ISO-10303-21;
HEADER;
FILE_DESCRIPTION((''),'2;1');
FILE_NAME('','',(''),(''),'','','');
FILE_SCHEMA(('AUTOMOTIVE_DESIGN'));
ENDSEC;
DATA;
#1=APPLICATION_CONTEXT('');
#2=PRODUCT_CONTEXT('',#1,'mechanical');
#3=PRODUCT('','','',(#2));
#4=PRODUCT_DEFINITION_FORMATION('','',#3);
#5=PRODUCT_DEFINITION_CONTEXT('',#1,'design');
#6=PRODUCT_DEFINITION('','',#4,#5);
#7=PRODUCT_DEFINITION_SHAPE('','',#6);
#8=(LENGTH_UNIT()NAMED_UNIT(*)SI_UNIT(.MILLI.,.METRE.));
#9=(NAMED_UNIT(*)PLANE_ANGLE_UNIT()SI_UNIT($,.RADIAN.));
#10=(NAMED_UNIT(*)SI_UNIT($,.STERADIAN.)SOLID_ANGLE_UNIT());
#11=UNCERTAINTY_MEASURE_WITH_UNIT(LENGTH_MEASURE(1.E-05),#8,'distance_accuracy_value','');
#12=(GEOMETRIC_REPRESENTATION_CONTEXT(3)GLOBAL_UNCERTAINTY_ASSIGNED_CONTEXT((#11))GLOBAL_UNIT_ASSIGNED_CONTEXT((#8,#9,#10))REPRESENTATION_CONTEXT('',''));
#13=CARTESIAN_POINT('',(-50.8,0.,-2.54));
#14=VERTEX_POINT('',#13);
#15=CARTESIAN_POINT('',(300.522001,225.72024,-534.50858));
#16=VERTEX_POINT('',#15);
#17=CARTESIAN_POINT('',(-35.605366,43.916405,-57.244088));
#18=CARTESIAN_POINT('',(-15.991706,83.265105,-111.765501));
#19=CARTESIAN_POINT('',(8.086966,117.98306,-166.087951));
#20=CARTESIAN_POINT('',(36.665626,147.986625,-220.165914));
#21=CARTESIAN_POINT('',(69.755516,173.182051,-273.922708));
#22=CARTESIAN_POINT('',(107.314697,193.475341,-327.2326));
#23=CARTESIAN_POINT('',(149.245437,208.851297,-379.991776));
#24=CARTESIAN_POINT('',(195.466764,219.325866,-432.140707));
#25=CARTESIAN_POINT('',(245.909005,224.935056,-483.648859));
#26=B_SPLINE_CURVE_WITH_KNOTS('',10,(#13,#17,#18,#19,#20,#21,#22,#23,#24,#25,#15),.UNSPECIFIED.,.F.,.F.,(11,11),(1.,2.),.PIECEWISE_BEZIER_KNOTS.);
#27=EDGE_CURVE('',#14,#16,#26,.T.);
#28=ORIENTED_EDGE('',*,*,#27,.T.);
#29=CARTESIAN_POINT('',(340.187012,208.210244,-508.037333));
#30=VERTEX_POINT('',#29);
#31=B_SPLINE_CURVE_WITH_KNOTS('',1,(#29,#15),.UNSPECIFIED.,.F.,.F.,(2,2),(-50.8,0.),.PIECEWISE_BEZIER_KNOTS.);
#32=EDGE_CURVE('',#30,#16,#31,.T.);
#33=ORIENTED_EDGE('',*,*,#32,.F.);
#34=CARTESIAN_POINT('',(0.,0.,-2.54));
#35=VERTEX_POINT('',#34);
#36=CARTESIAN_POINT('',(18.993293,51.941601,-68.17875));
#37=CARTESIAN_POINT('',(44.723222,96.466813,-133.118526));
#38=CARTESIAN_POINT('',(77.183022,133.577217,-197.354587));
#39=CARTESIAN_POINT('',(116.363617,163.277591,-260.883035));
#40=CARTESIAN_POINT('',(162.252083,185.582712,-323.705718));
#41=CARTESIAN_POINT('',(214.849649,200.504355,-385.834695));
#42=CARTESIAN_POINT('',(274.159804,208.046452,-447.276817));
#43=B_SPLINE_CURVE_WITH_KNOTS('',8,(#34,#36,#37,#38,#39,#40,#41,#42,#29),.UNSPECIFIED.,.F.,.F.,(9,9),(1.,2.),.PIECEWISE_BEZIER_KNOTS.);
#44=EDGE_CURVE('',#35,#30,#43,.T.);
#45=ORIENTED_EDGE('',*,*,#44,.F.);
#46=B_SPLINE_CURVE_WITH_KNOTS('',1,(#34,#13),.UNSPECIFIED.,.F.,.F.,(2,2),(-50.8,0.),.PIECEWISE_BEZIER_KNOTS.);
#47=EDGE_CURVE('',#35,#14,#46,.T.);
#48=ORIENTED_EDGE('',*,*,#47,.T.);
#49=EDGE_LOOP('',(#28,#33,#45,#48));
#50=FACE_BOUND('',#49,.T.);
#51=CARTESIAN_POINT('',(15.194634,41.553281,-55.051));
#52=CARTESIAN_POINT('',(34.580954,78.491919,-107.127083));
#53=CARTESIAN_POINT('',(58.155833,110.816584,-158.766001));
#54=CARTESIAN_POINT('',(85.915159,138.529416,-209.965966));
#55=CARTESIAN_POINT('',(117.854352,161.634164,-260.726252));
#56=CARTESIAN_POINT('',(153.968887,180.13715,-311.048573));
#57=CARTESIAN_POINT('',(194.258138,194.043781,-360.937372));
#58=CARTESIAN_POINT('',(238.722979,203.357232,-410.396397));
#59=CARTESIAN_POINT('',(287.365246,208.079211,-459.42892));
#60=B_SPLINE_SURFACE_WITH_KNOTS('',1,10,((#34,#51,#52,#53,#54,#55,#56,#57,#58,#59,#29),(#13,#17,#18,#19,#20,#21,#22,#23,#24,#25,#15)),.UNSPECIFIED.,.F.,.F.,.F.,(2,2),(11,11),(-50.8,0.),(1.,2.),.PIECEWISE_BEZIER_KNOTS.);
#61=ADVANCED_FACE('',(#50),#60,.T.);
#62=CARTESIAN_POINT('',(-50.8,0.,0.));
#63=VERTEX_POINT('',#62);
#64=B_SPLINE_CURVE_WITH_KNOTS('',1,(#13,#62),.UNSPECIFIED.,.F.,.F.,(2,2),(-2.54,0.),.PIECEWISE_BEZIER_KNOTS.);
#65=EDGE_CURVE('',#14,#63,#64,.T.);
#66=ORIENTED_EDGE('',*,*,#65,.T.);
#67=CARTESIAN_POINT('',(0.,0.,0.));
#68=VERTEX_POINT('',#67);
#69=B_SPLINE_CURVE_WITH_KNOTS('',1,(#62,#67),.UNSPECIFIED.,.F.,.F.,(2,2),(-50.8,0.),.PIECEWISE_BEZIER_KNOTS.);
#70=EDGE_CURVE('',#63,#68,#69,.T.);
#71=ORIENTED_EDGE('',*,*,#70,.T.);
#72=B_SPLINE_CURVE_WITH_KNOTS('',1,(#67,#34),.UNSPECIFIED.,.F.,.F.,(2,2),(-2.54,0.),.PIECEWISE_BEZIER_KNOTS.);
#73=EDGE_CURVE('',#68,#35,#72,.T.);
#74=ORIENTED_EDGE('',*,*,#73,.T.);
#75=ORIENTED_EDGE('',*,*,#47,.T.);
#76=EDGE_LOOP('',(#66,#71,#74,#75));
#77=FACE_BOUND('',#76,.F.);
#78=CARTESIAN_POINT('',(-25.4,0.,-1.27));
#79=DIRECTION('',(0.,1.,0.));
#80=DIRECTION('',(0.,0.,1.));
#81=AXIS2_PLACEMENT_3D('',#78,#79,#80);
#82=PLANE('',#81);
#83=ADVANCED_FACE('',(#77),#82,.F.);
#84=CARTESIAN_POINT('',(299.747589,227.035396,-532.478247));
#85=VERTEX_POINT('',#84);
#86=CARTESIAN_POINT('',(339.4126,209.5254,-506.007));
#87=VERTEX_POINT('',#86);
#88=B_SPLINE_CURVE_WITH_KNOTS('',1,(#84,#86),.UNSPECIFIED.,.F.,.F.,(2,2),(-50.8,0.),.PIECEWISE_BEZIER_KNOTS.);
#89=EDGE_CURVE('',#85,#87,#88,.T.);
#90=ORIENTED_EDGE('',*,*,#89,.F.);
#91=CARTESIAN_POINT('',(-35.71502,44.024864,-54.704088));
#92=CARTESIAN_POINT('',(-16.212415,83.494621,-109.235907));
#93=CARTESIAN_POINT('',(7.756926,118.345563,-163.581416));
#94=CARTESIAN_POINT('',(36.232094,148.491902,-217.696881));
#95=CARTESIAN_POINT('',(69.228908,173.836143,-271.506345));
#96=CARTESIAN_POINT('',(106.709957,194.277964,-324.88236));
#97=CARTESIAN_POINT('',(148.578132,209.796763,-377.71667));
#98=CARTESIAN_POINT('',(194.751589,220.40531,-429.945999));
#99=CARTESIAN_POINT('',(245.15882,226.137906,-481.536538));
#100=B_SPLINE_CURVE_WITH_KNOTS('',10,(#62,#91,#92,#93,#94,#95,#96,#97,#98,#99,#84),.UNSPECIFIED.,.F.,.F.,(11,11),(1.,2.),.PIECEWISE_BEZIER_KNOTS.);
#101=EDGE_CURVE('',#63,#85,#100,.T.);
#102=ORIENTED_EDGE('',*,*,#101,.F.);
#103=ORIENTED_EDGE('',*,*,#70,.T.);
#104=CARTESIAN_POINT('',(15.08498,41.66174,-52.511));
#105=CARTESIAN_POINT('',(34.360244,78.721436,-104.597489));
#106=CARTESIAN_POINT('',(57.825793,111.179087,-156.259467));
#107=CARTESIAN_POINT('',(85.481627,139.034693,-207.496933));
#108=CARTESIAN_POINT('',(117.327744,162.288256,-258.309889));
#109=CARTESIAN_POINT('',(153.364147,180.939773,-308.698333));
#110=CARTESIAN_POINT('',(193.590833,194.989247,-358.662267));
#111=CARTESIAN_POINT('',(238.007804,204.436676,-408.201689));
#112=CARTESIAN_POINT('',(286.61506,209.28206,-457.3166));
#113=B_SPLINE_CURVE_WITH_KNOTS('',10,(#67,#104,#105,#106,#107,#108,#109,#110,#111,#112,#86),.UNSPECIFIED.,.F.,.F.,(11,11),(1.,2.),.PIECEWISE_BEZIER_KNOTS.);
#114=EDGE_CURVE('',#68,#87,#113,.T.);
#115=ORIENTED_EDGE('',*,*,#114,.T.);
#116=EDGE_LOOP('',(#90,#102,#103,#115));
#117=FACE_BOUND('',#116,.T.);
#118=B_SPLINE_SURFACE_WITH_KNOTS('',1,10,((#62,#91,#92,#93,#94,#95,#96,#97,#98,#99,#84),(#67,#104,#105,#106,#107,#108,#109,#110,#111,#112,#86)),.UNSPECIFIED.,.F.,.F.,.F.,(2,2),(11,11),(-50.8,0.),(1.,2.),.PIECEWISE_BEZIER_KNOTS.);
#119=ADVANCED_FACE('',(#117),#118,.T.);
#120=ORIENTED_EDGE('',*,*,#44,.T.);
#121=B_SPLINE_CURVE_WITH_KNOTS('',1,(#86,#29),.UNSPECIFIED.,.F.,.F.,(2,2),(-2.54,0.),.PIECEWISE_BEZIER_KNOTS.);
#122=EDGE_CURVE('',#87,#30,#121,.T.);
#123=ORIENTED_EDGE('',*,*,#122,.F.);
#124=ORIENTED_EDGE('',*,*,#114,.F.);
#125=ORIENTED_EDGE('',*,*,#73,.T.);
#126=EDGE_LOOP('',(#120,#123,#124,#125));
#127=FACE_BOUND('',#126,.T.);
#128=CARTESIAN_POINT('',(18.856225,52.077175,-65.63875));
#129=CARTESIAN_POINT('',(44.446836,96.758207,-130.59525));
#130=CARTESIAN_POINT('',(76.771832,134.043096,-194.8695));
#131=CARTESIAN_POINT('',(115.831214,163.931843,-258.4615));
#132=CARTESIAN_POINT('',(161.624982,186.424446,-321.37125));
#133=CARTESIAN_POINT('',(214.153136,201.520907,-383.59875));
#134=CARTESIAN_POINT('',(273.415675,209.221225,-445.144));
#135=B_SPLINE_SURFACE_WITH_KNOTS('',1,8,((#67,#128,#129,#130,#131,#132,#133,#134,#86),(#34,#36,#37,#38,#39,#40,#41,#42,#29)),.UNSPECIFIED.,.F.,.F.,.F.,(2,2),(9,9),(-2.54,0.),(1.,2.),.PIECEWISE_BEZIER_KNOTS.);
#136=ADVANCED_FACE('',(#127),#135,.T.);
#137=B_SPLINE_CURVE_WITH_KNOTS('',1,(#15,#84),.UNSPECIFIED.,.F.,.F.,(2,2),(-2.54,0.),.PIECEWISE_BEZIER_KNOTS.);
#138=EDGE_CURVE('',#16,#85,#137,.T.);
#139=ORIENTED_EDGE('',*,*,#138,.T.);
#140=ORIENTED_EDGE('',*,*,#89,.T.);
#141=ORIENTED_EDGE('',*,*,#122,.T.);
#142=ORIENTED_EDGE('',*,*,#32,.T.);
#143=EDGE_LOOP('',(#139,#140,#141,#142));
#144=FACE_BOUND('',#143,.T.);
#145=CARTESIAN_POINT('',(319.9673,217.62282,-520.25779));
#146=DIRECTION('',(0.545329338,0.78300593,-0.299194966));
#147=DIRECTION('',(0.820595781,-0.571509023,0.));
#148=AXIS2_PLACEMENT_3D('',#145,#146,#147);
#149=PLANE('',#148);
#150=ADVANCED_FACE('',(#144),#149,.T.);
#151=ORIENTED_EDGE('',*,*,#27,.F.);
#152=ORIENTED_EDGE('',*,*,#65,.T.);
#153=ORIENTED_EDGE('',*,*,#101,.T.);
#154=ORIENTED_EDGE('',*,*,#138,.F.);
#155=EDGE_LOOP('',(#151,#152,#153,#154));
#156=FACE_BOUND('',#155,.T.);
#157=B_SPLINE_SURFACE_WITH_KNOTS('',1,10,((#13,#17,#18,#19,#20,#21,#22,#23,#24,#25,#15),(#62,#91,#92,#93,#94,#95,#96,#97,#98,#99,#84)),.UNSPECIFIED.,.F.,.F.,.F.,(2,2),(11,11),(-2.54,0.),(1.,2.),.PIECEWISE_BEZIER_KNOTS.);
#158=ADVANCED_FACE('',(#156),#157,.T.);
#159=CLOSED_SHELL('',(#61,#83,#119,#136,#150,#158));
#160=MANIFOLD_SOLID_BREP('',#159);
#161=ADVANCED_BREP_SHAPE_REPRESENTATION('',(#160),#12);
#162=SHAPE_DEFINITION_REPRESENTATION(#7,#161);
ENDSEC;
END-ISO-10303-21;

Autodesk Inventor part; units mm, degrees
ref_plane "YZ Plane" through (0, 0, 0) normal (1, 0, 0) x (0, 1, 0)
ref_plane "XZ Plane" through (0, 0, 0) normal (0, 1, 0) x (-1, 0, 0)
ref_plane "XY Plane" through (0, 0, 0) normal (0, 0, 1) x (1, 0, 0)
sketch "Sketch1" plane through (0, 0, 0) normal (0, 1, 0) x (-1, 0, 0)
  line L0 (0, 0) -> (50.8, 0)
  line L1 (50.8, 0) -> (50.8, -2.54)
  line L2 (50.8, -2.54) -> (0, -2.54)
  line L3 (0, -2.54) -> (0, 0)
  dimension "d0" = 50.8
  dimension "d1" = 2.54
sketch3d "3D Sketch1"
  spline S0 degree 2 poles (0, 0, 0) (75.4249, 208.3087, -262.555) (339.4126, 209.5254, -506.007) knots 1 1 1 2 2 2
sweep "Sweep1" add profiles "Sketch1" path "3D Sketch1"
properties part number "secondseatbeltpart"
